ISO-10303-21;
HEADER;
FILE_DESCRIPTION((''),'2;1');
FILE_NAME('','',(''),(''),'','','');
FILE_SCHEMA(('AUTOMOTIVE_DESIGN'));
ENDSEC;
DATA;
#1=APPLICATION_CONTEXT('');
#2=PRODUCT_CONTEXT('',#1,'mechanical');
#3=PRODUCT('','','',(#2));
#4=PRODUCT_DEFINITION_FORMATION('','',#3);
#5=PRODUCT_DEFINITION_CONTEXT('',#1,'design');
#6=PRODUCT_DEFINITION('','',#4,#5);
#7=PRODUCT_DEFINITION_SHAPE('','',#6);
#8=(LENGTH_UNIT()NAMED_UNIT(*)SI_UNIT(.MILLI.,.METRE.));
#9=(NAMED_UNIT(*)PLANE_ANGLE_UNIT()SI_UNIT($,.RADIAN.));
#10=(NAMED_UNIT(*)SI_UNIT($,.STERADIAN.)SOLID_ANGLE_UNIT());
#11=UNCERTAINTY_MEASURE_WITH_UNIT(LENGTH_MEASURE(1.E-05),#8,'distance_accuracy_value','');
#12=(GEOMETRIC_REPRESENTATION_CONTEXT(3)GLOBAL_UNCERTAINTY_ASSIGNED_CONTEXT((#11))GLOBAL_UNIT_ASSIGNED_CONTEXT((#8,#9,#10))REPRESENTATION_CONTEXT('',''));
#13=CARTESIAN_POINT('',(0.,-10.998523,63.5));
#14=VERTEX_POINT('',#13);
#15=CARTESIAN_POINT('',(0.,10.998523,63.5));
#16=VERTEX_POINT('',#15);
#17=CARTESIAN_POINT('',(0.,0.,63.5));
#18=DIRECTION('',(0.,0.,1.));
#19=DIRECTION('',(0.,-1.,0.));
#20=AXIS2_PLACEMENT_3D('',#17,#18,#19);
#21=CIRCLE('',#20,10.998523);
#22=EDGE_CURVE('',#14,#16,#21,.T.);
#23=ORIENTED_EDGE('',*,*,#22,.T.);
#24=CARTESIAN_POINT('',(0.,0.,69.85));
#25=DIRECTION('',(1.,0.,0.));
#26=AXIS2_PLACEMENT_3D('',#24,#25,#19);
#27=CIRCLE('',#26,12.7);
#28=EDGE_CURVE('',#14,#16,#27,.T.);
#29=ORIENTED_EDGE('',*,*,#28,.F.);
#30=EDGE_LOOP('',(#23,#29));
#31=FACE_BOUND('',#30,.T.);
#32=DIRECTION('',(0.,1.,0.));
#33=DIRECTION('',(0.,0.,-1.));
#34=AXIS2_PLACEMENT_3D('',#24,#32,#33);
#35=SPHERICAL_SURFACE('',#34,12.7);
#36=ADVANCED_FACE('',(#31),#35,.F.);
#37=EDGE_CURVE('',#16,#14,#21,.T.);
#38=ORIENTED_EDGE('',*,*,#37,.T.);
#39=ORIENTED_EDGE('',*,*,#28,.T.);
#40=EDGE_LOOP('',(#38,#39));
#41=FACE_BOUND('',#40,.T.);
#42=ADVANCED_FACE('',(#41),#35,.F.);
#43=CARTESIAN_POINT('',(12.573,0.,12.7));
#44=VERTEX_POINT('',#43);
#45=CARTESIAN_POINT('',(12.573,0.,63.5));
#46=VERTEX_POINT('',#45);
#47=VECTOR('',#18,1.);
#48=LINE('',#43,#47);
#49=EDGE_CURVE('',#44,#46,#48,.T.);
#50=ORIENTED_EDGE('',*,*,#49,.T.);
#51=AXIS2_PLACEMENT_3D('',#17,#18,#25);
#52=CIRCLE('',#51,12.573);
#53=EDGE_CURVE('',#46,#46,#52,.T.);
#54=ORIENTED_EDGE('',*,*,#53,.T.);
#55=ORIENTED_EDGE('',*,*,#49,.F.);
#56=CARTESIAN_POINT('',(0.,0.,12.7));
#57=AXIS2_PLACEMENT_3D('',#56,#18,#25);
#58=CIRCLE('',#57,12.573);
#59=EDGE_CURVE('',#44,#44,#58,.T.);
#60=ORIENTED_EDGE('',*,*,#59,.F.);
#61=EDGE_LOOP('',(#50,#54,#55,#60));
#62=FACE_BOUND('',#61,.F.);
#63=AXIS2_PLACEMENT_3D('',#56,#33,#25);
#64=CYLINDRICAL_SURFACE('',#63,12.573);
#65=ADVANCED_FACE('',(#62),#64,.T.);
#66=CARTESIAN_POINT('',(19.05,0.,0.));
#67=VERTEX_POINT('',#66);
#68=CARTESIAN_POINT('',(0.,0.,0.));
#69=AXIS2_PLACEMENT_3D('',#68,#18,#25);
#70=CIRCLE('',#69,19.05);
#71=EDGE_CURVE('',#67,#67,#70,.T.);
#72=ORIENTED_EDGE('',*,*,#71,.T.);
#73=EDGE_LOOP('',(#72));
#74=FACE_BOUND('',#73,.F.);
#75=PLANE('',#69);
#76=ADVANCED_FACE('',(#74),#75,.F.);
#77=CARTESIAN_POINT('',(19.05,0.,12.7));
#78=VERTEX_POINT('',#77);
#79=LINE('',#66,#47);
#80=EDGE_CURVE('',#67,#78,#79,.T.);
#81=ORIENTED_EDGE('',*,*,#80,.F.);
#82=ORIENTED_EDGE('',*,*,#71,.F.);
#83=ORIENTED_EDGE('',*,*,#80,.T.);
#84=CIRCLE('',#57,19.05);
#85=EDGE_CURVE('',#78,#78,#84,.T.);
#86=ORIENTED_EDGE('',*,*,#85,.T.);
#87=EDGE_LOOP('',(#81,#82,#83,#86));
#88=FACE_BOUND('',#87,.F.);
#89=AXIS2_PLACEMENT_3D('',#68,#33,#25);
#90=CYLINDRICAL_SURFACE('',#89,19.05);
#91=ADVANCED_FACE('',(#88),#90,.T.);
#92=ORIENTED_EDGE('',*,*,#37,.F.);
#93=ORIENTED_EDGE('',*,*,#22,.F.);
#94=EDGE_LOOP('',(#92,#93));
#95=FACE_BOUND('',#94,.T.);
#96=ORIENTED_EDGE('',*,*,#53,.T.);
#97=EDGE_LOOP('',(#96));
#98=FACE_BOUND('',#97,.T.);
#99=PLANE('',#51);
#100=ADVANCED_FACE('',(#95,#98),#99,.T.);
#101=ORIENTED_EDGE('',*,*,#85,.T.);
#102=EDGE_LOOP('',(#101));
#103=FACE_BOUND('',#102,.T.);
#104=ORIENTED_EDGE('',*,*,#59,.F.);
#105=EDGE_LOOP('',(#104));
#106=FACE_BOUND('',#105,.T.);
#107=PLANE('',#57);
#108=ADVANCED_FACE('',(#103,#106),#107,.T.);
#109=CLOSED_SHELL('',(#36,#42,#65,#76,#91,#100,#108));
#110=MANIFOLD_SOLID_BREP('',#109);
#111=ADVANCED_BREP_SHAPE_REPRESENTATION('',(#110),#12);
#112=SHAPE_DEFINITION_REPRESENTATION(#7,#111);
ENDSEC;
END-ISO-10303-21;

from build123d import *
from build123d import SkipClean  # not in build123d's __all__

# Parameters (mm, degrees)
F0_R     = 19.05
F1_DEPTH = 12.7
F2_R     = 12.573
F3_DEPTH = 50.8


with BuildPart() as f1:
    # F0 (on Top) → F1 (new body)
    with BuildSketch(Plane.XY):
        Circle(F0_R)
    extrude(amount=F1_DEPTH)

    # F2 (on face) → F3 (join)
    with BuildSketch(Plane.XY.offset(12.7)):
        Circle(F2_R)
    extrude(amount=F3_DEPTH)

    # F4 (on Right) → F5 (revolve, cut)
    with BuildSketch(Plane.YZ):
        with BuildLine():
            Line((12.7, 69.85), (-12.7, 69.85))
            ThreePointArc((-12.7, 69.85), (0, 57.15), (12.7, 69.85))
        make_face()
    with SkipClean():  # cleaning this boolean's faces spoils the solid; the shape is the same uncleaned
        revolve(axis=Axis((0, 0, 69.85), (0, -1, 0)), mode=Mode.SUBTRACT)


solid = f1.part
